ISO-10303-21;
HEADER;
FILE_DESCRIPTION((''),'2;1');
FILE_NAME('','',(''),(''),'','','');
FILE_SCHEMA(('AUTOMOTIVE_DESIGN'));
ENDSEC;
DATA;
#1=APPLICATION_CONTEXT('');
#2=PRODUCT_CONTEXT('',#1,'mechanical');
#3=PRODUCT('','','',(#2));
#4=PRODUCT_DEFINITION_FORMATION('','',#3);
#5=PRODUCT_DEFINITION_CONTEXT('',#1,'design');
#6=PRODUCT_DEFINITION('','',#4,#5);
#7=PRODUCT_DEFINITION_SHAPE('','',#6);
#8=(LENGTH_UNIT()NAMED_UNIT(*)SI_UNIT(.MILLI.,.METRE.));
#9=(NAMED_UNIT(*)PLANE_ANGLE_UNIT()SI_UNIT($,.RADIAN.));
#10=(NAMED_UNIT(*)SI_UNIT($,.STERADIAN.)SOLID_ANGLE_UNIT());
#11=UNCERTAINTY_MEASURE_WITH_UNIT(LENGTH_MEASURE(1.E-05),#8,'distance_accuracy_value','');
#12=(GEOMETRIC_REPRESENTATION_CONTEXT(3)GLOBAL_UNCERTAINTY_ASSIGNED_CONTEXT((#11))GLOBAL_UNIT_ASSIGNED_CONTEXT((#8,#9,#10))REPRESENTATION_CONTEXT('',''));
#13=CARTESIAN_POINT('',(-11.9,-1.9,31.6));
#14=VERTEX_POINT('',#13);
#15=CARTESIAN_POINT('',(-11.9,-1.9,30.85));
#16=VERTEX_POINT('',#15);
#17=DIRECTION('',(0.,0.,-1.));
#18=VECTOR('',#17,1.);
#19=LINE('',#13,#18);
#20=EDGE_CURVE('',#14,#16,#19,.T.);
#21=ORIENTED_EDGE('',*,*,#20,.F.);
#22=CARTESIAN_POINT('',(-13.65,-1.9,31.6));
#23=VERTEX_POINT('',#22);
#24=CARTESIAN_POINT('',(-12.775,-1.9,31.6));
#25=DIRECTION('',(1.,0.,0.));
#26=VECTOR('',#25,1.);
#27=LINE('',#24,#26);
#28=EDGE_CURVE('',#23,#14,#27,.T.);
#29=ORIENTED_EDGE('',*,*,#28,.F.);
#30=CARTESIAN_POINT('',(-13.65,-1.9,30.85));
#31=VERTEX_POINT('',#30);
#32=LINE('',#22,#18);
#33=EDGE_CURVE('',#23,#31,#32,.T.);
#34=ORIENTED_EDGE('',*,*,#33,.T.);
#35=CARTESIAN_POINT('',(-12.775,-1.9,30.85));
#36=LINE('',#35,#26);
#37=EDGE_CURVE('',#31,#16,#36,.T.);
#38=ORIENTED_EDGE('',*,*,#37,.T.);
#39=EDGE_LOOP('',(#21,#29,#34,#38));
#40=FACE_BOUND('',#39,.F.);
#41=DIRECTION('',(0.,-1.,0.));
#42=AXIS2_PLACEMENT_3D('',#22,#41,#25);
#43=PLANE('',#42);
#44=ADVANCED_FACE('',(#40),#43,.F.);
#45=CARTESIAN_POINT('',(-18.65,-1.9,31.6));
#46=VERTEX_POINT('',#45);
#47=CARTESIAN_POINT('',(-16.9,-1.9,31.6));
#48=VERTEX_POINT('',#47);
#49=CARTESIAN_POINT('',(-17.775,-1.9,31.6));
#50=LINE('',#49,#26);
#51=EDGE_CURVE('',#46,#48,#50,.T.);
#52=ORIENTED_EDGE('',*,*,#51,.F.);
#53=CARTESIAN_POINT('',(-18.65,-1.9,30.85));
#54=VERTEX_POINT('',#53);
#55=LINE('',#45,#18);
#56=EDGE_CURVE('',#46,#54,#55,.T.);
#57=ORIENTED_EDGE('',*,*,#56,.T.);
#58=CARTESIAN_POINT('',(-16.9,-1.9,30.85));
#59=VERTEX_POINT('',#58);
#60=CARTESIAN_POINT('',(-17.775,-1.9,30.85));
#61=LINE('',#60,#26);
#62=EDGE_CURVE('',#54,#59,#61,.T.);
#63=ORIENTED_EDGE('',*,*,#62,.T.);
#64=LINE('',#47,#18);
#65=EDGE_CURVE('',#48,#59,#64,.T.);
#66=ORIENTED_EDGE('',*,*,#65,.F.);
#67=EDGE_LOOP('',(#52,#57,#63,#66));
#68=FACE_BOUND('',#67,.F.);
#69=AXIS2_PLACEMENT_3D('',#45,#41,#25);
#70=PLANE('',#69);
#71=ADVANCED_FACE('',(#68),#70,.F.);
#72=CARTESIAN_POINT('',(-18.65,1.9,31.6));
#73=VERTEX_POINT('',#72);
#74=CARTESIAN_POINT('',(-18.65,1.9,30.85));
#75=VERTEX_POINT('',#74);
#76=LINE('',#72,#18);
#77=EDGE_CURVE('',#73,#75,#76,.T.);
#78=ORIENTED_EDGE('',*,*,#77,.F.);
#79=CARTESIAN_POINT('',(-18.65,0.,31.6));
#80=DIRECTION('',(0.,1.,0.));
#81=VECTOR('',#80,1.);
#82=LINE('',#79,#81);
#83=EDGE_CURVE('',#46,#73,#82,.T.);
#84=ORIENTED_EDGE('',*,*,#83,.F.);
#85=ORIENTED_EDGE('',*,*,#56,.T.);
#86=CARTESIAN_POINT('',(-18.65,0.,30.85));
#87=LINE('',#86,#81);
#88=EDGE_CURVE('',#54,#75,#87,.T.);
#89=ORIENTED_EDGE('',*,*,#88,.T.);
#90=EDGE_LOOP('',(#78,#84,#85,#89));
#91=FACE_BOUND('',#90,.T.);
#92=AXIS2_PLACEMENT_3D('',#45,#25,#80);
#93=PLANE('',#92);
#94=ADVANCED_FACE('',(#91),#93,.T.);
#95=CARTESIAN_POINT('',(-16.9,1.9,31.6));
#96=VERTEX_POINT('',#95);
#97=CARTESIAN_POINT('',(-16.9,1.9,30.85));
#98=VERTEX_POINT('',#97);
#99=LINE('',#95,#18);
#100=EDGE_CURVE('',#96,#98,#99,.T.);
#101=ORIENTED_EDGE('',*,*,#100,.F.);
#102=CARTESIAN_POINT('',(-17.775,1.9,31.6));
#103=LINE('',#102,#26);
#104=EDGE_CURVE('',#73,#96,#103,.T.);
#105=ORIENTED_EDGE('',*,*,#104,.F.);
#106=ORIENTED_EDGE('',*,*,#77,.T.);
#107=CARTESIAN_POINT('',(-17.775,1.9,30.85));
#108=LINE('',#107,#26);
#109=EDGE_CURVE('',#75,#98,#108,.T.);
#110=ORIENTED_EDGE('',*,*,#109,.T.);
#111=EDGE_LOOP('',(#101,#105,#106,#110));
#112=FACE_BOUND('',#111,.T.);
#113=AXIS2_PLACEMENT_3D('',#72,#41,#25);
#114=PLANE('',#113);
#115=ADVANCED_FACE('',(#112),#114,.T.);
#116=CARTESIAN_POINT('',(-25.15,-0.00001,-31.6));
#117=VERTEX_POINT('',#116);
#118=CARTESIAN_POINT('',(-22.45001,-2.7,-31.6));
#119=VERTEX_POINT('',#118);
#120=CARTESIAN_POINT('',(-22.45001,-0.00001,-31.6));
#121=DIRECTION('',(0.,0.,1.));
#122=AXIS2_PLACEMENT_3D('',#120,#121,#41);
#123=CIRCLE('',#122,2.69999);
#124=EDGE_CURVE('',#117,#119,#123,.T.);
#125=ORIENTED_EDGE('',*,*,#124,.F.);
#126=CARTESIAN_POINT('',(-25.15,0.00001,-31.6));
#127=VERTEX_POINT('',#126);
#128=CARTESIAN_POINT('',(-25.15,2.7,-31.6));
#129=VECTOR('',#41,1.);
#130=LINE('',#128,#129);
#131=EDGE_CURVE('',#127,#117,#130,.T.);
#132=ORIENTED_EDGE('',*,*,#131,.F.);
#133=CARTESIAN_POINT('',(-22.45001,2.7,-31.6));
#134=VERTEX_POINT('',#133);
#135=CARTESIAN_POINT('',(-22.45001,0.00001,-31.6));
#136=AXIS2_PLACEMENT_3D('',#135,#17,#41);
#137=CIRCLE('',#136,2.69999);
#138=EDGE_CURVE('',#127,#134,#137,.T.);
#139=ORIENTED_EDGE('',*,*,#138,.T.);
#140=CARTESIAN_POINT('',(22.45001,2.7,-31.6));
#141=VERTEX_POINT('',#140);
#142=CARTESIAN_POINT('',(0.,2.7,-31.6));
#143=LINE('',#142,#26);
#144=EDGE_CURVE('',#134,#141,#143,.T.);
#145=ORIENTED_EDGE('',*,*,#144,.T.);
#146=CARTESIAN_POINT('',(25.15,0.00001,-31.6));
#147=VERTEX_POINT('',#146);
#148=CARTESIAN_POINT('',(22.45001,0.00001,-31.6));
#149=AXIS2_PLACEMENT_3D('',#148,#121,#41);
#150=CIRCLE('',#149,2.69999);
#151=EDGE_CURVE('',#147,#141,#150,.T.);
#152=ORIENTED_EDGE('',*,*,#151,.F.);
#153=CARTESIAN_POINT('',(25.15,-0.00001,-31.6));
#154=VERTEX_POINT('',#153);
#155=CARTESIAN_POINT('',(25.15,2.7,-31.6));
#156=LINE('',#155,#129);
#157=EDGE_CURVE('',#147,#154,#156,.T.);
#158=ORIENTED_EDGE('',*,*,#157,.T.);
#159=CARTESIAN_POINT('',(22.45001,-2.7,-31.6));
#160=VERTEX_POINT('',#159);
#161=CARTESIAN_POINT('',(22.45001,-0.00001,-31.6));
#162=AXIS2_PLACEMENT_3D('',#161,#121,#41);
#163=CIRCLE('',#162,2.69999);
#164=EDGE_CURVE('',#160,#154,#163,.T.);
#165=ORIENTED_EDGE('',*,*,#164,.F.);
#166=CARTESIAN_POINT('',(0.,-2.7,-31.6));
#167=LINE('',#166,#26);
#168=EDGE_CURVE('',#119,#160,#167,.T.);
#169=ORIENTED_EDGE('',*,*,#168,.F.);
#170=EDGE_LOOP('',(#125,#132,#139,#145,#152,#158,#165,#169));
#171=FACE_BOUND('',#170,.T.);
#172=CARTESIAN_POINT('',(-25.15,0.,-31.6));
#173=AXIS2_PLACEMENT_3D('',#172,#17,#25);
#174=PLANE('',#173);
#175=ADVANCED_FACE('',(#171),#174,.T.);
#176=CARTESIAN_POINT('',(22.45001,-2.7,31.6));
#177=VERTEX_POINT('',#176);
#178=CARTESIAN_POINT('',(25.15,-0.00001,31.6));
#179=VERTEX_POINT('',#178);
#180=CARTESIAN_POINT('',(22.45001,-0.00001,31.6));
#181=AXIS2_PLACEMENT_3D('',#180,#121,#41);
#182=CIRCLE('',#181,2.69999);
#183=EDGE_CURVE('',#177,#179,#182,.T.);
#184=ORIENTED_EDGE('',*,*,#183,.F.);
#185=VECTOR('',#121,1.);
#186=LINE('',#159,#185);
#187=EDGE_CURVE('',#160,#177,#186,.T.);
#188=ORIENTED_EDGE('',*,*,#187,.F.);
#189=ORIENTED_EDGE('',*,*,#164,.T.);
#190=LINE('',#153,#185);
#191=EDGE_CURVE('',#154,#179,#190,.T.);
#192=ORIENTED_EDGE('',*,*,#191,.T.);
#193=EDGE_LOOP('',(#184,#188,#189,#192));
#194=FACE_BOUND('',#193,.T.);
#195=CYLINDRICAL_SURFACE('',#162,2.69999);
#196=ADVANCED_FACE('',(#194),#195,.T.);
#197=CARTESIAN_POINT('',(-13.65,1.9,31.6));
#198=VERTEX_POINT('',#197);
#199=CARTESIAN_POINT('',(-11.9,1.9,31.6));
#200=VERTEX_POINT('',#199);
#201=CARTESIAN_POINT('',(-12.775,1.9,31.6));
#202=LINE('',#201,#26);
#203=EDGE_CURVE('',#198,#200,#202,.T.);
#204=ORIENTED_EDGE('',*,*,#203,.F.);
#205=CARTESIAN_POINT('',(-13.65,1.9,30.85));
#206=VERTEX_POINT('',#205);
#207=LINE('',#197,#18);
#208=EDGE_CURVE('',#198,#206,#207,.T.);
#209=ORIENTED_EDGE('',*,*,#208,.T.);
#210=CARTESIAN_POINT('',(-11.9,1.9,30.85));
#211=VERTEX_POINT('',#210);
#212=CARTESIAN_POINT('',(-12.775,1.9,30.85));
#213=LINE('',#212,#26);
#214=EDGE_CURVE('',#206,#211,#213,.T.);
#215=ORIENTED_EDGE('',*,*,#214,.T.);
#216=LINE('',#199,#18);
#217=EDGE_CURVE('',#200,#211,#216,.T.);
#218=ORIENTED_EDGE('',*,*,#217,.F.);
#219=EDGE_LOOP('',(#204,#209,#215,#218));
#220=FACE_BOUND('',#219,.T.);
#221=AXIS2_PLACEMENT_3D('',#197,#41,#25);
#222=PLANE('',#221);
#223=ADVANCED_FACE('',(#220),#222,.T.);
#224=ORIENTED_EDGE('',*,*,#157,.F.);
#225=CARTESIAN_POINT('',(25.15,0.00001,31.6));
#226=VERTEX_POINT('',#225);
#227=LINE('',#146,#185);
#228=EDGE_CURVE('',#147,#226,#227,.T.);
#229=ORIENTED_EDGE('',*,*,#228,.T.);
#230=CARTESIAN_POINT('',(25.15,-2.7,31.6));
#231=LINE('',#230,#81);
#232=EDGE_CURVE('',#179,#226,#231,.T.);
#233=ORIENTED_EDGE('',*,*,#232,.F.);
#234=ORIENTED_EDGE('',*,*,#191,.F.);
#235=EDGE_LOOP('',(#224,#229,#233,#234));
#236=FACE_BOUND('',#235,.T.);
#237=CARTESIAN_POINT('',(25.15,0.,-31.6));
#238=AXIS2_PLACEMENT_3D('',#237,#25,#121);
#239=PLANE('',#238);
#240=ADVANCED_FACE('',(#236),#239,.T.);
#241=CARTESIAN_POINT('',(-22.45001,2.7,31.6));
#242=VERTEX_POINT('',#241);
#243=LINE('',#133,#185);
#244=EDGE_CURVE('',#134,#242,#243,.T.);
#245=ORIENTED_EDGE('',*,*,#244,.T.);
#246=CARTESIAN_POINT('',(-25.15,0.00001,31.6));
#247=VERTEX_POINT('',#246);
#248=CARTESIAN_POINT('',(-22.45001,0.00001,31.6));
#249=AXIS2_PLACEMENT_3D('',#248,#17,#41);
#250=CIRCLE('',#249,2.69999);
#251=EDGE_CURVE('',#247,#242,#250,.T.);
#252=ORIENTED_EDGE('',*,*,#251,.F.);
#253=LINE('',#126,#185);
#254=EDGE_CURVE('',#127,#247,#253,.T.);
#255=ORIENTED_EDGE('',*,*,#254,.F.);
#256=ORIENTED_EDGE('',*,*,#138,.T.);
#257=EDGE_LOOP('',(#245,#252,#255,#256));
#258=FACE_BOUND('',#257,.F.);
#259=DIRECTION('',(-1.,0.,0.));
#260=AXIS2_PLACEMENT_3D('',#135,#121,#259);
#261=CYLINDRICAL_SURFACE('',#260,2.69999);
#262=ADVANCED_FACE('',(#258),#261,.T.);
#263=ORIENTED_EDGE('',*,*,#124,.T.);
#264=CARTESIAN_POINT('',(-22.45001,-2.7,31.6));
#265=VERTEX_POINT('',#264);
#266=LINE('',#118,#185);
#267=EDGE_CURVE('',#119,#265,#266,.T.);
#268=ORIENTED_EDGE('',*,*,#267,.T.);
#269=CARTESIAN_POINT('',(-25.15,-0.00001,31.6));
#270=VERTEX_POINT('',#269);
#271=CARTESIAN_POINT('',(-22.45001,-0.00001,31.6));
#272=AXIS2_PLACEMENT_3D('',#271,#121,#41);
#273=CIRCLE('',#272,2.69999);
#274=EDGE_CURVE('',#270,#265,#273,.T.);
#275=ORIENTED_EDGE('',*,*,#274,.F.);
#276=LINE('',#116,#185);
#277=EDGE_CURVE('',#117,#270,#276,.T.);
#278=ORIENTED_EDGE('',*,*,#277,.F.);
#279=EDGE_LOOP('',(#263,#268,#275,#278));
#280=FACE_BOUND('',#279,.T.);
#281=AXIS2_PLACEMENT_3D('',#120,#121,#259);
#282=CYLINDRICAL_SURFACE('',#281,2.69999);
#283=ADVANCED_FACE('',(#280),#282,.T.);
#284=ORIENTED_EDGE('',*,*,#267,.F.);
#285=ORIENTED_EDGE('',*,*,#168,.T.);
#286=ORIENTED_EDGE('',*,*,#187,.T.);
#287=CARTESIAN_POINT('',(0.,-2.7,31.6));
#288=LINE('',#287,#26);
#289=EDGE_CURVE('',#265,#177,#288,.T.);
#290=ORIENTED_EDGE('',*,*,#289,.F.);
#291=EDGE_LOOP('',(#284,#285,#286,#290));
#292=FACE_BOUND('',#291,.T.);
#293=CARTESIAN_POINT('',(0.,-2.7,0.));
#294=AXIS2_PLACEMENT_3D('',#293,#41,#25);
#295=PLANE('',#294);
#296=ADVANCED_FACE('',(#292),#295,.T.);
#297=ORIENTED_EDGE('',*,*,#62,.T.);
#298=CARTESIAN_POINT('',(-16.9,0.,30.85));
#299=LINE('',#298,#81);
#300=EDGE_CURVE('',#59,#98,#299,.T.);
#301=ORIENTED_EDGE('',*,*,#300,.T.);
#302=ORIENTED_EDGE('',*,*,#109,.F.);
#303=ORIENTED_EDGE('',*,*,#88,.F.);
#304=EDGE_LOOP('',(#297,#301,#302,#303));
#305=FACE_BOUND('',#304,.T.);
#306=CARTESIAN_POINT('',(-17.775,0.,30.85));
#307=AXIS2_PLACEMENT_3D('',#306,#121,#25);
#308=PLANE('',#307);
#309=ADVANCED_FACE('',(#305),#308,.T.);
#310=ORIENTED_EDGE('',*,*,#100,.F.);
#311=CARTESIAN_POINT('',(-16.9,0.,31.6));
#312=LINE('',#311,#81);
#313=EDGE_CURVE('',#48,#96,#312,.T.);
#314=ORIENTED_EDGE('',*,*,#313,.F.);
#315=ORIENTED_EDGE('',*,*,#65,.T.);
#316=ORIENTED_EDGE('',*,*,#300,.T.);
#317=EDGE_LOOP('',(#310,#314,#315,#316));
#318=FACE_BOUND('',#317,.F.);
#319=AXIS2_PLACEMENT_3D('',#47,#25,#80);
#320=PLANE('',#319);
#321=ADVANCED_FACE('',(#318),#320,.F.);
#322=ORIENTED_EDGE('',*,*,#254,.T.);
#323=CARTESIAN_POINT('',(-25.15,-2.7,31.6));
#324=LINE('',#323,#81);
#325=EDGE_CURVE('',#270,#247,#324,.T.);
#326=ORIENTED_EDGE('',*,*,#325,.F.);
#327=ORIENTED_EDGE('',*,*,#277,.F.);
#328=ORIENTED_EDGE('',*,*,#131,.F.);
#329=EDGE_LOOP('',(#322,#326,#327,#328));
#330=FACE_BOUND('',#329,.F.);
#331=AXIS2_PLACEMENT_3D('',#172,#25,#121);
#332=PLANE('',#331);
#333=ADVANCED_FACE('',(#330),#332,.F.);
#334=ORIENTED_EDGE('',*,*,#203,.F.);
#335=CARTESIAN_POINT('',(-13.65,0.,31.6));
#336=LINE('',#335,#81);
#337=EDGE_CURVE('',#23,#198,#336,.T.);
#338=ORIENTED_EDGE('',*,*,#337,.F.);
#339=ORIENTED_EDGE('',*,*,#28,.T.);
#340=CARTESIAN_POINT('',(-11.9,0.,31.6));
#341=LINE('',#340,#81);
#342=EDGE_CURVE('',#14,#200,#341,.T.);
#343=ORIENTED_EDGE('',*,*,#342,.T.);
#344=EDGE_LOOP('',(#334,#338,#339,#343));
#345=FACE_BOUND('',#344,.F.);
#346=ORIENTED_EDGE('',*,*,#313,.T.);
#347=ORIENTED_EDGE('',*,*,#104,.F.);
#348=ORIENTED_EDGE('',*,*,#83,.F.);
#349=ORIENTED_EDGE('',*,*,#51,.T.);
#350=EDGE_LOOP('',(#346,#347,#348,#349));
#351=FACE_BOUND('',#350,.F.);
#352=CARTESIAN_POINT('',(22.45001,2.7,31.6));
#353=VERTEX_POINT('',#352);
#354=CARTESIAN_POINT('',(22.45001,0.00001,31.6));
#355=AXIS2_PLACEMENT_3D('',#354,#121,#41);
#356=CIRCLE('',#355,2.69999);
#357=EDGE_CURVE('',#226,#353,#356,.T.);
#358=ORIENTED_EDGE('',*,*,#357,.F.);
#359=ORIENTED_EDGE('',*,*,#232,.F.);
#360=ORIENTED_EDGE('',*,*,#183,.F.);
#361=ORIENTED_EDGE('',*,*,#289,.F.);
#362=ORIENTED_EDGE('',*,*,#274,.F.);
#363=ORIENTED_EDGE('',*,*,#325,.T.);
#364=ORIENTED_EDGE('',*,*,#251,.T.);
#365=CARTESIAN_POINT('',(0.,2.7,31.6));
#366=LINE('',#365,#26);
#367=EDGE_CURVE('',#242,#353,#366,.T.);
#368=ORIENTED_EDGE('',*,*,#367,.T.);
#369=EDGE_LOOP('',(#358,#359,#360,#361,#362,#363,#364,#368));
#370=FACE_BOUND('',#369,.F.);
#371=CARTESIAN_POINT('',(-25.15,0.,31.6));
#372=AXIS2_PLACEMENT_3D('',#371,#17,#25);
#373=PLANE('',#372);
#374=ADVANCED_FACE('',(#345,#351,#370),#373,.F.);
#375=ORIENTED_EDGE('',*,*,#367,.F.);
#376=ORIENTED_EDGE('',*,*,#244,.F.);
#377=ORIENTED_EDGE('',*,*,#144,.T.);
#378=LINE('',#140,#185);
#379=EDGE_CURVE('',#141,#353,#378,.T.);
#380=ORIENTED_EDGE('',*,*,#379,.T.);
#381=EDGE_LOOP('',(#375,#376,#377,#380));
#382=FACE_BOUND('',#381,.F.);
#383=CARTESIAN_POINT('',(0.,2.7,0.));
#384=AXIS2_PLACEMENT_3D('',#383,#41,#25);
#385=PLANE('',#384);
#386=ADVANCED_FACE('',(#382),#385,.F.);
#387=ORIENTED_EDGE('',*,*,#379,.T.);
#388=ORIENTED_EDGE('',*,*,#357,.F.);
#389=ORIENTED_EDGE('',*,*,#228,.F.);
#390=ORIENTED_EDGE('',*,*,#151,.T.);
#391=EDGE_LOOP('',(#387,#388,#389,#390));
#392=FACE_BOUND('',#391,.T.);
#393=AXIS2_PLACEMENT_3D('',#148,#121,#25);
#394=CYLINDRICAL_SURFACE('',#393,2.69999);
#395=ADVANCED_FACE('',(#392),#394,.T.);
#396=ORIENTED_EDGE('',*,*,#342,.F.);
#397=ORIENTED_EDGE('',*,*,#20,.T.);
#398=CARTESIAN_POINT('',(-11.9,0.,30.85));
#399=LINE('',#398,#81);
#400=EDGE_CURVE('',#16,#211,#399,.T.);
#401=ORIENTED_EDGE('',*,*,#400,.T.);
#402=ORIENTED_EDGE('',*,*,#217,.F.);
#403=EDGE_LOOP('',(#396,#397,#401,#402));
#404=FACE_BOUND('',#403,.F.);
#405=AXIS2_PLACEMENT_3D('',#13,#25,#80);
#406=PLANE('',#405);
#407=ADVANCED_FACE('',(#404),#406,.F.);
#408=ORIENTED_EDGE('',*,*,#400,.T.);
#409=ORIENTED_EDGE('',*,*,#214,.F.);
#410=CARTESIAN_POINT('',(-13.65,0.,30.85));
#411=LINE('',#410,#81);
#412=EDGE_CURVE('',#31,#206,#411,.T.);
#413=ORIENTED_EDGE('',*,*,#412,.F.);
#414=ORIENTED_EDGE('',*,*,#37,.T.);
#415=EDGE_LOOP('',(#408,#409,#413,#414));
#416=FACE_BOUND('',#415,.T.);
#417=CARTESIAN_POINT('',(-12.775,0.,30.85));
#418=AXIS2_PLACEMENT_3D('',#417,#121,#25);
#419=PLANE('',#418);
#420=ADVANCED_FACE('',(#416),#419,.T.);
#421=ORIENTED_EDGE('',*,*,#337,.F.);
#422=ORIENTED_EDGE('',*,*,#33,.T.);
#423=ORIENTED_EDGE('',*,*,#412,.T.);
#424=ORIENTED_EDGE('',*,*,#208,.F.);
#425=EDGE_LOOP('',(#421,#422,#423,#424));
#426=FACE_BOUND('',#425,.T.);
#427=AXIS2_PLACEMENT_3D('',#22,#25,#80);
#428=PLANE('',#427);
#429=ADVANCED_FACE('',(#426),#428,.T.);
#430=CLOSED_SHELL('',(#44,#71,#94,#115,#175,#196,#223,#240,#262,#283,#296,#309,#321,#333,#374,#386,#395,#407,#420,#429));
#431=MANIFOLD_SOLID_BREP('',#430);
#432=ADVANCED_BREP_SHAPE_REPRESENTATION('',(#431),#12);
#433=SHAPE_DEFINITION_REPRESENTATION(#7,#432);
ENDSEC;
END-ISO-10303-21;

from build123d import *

# Parameters (mm, degrees)
F0_W     = 50.3
F0_H     = 63.2
F1_DEPTH = 2.7
F2_R     = 2.69999
F3_W     = 1.75
F3_H     = 3.8
F4_DEPTH = 0.75


# Not quite as in the source:
# - a fillet or chamfer is up to 0.001 mm smaller than in the source, because OpenCascade refuses the exact size


with BuildPart() as f1:
    # F0 (on Front) → F1 (new body, symmetric)
    with BuildSketch(Plane.XZ):
        Rectangle(F0_W, F0_H)
    extrude(amount=F1_DEPTH, both=True)

    # F2 (radius 2.7 in the source; OpenCascade refuses exactly that, so slightly less here)
    f2_edges = [f1.edges().sort_by_distance(p)[0] for p in [
        (25.15, 2.7, 0),
        (25.15, -2.7, 0),
        (-25.15, -2.7, 0),
        (-25.15, 2.7, 0),
    ]]
    fillet(f2_edges, radius=F2_R)

    # F3 (on face) → F4 (cut)
    with BuildSketch(Plane.XY.offset(31.6)):
        with Locations((-17.775, 0)):
            Rectangle(F3_W, F3_H)
        with Locations((-12.775, 0)):
            Rectangle(F3_W, F3_H)
    extrude(amount=-F4_DEPTH, mode=Mode.SUBTRACT)


solid = f1.part
